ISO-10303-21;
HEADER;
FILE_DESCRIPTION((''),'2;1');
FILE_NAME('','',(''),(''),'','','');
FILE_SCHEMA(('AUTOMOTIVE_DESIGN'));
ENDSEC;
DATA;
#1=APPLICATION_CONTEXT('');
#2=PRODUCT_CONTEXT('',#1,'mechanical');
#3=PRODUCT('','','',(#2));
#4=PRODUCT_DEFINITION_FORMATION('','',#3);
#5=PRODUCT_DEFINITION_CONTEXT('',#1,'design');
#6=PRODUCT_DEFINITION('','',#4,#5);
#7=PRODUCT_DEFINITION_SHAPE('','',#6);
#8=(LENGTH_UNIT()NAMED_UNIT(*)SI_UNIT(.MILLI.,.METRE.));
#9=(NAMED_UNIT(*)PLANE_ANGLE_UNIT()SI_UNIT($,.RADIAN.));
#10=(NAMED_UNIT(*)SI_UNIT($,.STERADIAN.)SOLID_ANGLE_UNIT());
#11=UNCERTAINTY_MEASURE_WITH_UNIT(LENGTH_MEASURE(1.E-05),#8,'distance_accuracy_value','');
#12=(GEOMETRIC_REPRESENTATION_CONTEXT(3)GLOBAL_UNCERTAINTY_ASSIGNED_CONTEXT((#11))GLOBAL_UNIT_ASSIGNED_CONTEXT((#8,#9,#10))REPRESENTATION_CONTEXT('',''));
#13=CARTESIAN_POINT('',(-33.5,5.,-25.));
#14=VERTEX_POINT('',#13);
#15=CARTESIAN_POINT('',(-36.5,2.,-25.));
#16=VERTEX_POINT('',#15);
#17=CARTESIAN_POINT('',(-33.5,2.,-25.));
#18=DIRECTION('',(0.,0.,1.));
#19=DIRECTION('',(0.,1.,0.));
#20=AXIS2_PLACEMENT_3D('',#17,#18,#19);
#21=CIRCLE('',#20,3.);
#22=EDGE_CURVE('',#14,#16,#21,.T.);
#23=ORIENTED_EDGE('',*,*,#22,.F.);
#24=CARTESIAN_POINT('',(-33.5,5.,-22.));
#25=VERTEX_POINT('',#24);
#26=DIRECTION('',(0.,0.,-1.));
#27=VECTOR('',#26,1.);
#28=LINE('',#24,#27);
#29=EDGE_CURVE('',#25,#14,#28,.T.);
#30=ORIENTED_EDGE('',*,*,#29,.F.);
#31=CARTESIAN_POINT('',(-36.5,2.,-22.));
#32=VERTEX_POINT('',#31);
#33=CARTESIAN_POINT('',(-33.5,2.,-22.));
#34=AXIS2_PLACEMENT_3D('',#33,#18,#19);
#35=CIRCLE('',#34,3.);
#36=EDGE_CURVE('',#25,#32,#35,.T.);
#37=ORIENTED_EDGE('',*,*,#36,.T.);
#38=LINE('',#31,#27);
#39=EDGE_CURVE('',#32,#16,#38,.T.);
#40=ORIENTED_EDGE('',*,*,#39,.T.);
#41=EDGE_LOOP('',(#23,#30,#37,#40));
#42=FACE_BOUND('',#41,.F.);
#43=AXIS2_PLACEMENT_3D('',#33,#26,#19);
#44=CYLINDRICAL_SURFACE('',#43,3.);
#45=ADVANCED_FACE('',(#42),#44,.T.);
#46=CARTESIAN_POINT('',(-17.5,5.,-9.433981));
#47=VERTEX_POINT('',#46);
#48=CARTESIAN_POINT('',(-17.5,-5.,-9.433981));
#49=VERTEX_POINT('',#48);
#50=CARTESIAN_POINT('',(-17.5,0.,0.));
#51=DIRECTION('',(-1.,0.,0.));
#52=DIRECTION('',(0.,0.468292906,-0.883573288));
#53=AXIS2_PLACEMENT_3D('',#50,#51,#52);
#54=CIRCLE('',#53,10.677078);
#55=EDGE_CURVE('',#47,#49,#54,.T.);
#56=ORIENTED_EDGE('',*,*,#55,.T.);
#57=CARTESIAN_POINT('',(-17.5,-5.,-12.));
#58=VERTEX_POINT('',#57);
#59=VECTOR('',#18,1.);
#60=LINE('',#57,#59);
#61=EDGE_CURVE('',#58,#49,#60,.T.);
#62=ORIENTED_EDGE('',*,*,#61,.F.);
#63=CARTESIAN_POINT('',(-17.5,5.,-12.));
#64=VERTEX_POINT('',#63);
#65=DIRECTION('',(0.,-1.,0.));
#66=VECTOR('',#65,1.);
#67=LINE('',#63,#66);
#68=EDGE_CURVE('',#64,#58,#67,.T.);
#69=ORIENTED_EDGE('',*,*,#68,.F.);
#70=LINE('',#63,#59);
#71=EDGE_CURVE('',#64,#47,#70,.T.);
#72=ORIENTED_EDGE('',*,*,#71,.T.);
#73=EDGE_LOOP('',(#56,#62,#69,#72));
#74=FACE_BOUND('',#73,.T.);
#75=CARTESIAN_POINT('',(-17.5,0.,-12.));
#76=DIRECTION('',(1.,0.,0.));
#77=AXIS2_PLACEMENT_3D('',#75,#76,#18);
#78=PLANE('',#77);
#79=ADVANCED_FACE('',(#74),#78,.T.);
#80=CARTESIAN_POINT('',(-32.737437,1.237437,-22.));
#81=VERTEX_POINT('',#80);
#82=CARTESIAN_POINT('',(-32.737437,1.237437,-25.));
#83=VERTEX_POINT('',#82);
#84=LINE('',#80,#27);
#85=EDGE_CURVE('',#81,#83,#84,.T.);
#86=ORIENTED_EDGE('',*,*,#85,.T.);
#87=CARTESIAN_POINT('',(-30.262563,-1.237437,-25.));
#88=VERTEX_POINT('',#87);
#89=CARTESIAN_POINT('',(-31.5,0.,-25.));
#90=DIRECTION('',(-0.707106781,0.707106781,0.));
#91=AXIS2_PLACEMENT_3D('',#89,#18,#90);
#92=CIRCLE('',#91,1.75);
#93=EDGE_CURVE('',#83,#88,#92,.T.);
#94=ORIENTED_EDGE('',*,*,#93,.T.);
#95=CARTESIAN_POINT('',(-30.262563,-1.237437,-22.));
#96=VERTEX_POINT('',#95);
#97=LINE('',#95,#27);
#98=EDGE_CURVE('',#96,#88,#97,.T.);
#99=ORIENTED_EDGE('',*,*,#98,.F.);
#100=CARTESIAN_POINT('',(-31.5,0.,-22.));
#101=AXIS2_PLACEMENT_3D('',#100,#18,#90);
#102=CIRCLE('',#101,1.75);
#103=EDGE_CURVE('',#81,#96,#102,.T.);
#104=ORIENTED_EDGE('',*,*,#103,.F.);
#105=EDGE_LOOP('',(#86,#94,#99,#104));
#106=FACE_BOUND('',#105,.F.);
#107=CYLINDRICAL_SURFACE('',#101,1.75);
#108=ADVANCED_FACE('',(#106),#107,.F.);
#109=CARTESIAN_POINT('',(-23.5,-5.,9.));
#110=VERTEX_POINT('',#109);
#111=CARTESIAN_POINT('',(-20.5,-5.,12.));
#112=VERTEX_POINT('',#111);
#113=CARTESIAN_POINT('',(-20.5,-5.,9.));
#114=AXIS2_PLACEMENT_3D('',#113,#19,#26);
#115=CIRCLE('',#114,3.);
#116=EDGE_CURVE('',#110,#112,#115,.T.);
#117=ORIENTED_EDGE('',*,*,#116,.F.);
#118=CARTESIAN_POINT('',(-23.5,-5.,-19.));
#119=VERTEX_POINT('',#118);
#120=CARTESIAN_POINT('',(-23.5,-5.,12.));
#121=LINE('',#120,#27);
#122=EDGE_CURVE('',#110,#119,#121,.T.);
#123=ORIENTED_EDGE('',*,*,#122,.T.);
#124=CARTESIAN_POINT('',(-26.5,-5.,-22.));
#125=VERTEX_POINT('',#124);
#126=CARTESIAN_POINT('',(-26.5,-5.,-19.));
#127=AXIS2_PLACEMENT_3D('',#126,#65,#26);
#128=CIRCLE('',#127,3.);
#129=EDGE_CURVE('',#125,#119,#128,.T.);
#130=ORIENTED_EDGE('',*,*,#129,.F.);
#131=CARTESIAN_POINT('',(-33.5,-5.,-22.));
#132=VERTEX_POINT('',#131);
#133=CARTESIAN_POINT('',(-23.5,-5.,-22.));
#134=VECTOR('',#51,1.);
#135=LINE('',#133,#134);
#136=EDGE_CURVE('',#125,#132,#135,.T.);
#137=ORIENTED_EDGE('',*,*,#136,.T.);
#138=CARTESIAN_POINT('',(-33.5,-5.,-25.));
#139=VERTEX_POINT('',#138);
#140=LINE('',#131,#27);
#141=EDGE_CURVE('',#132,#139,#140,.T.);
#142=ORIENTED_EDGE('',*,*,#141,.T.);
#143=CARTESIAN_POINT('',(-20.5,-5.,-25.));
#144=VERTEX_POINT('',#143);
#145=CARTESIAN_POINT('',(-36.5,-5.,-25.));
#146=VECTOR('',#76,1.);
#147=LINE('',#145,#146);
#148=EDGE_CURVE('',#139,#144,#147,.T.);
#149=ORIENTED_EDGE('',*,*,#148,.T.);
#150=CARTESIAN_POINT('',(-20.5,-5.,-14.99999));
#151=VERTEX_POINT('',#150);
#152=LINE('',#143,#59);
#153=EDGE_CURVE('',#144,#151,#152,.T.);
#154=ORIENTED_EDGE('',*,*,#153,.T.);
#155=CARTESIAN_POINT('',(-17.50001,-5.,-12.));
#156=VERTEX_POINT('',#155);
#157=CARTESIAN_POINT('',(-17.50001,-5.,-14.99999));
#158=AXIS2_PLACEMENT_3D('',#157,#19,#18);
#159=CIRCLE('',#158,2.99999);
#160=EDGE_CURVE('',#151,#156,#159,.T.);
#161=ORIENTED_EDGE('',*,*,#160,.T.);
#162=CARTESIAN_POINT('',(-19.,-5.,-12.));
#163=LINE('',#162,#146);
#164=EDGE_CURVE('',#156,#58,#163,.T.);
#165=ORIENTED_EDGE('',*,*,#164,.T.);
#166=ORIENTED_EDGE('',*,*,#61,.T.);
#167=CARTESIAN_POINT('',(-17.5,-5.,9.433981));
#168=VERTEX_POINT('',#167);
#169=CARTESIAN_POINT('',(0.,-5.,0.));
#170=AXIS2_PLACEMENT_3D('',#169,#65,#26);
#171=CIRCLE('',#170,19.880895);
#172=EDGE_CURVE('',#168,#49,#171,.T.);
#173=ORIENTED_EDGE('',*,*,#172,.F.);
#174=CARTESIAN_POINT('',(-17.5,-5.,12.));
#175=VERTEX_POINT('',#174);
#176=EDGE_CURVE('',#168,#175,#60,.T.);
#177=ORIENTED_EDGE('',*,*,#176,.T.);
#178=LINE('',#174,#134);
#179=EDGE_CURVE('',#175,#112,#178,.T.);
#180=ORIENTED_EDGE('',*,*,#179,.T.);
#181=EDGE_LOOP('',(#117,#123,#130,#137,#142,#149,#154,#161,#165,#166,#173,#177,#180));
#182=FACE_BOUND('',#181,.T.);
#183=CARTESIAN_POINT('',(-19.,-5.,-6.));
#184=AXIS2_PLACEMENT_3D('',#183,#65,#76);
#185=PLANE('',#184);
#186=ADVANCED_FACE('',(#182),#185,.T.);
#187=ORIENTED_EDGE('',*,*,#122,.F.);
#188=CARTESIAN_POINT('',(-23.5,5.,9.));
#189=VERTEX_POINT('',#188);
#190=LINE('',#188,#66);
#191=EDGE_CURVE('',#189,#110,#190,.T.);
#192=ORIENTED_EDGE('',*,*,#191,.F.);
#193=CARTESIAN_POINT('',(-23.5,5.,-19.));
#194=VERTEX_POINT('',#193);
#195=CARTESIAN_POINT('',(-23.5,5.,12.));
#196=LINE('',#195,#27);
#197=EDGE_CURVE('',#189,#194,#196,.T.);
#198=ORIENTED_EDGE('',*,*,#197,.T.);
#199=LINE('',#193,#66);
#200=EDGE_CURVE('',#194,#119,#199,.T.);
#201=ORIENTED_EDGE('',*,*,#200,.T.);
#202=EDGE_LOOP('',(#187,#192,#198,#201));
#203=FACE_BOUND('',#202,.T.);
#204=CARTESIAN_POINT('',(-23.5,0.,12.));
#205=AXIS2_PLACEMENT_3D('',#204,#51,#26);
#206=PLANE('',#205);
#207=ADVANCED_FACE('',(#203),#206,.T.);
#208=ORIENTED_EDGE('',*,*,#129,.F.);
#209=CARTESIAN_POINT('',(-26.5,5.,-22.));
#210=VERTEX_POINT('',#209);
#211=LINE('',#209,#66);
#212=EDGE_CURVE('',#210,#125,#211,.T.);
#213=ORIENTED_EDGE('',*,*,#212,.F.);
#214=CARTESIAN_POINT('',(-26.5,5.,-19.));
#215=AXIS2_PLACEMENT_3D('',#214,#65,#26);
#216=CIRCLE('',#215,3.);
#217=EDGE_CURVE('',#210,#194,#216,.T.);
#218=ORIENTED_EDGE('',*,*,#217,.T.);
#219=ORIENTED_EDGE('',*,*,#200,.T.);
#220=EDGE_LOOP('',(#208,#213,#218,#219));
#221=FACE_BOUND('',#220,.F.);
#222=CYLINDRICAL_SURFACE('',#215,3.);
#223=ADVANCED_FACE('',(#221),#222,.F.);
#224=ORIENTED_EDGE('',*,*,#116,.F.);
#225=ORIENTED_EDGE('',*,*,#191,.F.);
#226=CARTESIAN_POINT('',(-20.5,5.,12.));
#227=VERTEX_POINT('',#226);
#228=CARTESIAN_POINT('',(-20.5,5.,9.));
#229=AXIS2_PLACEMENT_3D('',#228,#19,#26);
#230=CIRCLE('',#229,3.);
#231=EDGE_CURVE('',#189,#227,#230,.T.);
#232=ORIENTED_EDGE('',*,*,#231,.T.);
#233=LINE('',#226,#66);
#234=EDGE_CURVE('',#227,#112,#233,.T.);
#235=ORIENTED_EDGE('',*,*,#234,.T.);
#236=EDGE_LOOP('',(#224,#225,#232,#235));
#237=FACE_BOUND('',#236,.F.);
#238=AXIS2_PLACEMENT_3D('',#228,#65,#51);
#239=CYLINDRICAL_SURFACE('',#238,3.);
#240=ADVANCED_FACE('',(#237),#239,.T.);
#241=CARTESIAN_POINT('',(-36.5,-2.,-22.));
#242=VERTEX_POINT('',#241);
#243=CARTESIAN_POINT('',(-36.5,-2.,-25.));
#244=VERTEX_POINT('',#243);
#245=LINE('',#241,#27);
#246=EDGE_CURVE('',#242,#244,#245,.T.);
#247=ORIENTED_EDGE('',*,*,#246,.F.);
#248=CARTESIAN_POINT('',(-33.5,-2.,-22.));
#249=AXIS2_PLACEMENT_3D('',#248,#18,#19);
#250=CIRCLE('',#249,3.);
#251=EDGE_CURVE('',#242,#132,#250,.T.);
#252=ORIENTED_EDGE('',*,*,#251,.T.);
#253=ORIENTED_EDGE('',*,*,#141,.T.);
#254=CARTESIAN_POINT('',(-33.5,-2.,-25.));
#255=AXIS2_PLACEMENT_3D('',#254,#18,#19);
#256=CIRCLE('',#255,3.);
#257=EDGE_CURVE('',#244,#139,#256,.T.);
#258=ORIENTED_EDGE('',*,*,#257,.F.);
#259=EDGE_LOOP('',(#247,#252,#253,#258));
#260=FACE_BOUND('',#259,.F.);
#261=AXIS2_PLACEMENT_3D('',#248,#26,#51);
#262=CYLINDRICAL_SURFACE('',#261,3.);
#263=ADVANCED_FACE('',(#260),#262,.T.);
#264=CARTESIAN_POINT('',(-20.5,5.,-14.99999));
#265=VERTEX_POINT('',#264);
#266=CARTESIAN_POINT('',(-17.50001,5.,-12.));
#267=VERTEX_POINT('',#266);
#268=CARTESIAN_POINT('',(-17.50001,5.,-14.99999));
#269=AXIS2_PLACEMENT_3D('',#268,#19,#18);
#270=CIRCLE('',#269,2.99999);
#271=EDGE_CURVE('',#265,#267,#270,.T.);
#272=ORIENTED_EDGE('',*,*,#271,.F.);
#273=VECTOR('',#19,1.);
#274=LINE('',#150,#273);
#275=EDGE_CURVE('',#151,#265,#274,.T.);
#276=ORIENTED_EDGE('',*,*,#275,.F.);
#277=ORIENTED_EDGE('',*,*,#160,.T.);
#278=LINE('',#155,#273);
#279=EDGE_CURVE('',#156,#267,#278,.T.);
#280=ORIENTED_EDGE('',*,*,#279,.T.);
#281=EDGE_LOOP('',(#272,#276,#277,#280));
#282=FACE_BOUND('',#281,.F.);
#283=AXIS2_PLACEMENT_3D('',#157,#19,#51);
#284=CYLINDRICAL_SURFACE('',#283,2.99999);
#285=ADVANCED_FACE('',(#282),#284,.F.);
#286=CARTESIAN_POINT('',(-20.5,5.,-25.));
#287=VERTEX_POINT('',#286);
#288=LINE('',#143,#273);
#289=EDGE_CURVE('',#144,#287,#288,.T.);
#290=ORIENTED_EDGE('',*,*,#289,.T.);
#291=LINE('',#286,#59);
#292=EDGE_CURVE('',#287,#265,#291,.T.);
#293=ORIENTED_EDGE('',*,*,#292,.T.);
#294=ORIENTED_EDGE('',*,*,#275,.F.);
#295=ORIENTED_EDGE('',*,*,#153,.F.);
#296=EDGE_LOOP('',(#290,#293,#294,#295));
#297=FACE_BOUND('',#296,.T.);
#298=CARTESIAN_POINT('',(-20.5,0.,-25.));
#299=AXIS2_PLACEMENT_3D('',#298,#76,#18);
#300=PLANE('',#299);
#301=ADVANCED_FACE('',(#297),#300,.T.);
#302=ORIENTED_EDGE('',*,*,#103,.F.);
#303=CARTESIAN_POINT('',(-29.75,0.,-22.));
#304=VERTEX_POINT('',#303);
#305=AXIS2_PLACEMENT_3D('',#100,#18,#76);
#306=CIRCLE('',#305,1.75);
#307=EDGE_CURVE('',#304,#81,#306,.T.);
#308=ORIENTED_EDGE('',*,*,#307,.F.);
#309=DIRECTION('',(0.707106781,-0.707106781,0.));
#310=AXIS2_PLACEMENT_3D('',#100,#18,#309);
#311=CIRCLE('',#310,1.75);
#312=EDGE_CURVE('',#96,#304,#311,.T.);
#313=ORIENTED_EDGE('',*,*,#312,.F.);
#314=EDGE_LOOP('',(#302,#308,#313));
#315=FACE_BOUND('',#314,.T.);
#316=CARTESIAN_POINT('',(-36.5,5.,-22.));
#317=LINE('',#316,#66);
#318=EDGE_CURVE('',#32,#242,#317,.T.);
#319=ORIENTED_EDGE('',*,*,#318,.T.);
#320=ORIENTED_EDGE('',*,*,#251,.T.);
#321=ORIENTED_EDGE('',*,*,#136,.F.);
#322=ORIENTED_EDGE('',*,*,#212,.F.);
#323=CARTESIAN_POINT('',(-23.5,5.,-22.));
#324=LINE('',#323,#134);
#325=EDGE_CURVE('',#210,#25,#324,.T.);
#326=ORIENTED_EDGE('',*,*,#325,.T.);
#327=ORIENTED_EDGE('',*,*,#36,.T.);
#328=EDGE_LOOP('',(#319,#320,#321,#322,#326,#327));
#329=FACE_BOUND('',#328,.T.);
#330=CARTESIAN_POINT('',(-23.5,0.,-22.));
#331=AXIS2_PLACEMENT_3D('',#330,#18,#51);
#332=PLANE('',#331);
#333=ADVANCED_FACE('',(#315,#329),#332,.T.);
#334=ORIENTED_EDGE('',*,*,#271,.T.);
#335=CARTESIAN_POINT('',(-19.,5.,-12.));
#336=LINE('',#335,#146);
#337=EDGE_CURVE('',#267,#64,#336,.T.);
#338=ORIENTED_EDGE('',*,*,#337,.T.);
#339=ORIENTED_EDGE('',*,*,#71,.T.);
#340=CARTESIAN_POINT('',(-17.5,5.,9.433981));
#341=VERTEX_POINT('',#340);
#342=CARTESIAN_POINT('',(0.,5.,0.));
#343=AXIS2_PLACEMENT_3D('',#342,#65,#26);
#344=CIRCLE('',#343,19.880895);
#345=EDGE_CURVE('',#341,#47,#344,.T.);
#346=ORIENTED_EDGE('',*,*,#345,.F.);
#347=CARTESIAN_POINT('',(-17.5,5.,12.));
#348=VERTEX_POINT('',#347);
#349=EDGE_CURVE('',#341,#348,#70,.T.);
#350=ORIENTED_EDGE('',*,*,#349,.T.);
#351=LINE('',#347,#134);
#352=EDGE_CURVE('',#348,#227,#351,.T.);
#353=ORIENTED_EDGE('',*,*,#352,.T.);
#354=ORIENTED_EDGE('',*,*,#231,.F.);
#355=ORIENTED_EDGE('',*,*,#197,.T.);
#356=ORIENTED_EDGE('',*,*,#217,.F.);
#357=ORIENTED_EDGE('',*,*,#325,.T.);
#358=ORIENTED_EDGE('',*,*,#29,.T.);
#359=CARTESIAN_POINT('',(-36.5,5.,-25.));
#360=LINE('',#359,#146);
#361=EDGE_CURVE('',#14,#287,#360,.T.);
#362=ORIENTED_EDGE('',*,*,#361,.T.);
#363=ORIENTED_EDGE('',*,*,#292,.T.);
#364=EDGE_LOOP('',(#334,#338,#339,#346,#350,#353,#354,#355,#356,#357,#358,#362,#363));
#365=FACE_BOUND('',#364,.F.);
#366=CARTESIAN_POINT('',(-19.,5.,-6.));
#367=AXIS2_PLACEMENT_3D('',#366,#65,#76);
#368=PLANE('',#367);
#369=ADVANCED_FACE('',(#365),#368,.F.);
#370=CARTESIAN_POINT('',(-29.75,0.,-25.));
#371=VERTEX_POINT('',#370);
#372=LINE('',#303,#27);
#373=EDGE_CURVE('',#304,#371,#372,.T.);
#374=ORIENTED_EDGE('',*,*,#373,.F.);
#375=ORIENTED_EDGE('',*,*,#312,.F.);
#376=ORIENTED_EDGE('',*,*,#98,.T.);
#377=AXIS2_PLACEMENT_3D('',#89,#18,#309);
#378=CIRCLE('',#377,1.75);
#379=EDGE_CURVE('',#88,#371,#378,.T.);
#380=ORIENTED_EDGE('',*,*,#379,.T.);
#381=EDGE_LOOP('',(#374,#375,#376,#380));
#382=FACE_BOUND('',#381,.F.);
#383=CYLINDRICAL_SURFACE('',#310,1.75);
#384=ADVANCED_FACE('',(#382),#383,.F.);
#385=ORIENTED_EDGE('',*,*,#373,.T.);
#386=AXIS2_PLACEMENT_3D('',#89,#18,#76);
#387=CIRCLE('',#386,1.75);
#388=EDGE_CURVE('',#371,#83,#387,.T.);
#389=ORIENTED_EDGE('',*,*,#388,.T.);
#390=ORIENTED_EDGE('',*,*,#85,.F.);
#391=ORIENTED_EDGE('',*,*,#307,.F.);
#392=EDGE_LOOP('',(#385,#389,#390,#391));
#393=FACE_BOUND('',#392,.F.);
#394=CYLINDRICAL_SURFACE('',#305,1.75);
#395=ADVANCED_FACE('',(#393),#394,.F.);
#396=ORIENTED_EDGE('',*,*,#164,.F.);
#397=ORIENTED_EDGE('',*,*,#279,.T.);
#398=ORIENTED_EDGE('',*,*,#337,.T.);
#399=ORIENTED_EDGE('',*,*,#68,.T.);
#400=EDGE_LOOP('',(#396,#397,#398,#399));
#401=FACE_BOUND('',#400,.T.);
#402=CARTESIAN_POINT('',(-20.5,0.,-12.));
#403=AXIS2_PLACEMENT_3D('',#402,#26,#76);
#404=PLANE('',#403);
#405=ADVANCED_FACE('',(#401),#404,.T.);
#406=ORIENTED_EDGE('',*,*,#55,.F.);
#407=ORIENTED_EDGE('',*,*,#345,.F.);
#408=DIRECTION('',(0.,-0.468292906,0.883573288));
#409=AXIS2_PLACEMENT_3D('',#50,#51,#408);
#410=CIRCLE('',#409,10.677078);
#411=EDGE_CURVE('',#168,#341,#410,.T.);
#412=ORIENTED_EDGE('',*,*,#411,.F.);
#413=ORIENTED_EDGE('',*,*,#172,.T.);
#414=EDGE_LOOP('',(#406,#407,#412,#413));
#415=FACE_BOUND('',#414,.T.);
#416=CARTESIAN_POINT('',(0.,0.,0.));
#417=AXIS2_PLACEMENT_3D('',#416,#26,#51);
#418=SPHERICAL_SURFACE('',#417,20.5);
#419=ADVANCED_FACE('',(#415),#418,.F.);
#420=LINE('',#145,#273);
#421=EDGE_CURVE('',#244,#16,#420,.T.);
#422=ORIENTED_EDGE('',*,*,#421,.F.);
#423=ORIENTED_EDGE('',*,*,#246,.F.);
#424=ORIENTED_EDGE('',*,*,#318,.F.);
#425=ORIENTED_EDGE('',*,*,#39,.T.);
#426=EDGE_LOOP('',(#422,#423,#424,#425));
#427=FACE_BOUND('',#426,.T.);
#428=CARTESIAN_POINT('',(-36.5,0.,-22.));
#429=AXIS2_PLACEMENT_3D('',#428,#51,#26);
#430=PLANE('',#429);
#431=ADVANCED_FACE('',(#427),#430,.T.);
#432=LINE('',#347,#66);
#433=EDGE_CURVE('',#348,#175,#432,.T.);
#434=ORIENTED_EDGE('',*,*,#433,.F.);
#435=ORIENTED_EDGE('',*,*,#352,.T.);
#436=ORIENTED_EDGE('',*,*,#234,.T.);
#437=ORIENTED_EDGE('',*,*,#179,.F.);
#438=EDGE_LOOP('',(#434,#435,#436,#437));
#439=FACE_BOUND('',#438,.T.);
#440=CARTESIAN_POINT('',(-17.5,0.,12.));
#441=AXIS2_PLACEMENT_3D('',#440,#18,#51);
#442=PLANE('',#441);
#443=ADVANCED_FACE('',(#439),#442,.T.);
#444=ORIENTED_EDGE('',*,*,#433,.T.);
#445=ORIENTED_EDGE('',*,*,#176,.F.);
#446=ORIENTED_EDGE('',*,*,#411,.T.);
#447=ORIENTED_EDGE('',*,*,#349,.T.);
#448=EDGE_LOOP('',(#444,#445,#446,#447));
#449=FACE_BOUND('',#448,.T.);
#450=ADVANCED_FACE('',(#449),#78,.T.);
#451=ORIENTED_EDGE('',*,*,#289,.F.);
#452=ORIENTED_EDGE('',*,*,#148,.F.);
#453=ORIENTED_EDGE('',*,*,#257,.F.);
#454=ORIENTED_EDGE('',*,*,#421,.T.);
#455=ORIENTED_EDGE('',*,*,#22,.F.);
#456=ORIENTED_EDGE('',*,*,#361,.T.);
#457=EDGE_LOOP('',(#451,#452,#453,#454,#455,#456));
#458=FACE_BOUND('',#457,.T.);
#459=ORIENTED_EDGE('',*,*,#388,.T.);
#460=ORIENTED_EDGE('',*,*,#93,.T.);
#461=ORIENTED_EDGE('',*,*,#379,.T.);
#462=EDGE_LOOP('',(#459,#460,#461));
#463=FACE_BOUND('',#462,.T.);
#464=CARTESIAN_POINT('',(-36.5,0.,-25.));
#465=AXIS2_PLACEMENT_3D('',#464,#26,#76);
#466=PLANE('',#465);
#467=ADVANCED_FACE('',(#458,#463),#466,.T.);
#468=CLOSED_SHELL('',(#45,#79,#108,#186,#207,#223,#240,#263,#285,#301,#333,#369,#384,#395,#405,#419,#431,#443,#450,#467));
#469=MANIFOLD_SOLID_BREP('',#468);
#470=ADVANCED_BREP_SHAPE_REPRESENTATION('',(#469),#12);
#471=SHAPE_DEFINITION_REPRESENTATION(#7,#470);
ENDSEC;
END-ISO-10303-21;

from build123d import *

# Parameters (mm, degrees)
F1_W          = 3
F1_H          = 12
F2_DEPTH      = 5
F2_DEPTH_BACK = 5
F4_R          = 3
F5_R          = 2.99999
F7_DEPTH      = 25
F8_R          = 3


# Not quite as in the source:
# - a fillet or chamfer is up to 0.001 mm smaller than in the source, because OpenCascade refuses the exact size


with BuildPart() as f2:
    # F1 (on Front) → F2 (new body, two sides)
    with BuildSketch(Plane.XZ) as f2_sk:
        with Locations((-19, -6)):
            Rectangle(F1_W, F1_H)
        Polygon((-20.5, 0), (-17.5, 0), (-17.5, 12), (-23.5, 12), (-23.5, -22), (-36.5, -22), (-36.5, -25), (-20.5, -25), (-20.5, -12), align=None)
    extrude(amount=F2_DEPTH)
    extrude(f2_sk.sketch, amount=-F2_DEPTH_BACK)

    # F0 (on Front) → F3 (revolve, cut)
    with BuildSketch(Plane.XZ):
        with BuildLine():
            Line((0, -20.5), (0, 20.5))
            ThreePointArc((0, 20.5), (-20.5, 0), (0, -20.5))
        make_face()
    revolve(axis=Axis((0, 0, 0), (0, 0, 1)), mode=Mode.SUBTRACT)

    # F4
    f4_edges = [f2.edges().sort_by_distance(p)[0] for p in [
        (-23.5, 0, 12),
        (-23.5, 0, -22),
    ]]
    fillet(f4_edges, radius=F4_R)

    # F5 (radius 3 in the source; OpenCascade refuses exactly that, so slightly less here)
    f5_edges = [f2.edges().sort_by_distance(p)[0] for p in [
        (-20.5, 0, -12),
    ]]
    fillet(f5_edges, radius=F5_R)

    # F6 (on face) → F7 (cut)
    with BuildSketch(Plane.XY.offset(-22)):
        with BuildLine():
            ThreePointArc((-29.75, 0), (-30.8303039934, 1.6167891819), (-32.7374368671, 1.2374368671))
            Line((-32.7374368671, 1.2374368671), (-30.2625631329, -1.2374368671))
            ThreePointArc((-30.2625631329, -1.2374368671), (-29.8832108181, -0.6696960066), (-29.75, 0))
        make_face()
        with BuildLine():
            Line((-30.2625631329, -1.2374368671), (-32.7374368671, 1.2374368671))
            ThreePointArc((-32.7374368671, 1.2374368671), (-32.7374368671, -1.2374368671), (-30.2625631329, -1.2374368671))
        make_face()
    extrude(amount=-F7_DEPTH, mode=Mode.SUBTRACT)

    # F8
    f8_edges = [f2.edges().sort_by_distance(p)[0] for p in [
        (-36.5, -5, -23.5),
        (-36.5, 5, -23.5),
    ]]
    fillet(f8_edges, radius=F8_R)


solid = f2.part
